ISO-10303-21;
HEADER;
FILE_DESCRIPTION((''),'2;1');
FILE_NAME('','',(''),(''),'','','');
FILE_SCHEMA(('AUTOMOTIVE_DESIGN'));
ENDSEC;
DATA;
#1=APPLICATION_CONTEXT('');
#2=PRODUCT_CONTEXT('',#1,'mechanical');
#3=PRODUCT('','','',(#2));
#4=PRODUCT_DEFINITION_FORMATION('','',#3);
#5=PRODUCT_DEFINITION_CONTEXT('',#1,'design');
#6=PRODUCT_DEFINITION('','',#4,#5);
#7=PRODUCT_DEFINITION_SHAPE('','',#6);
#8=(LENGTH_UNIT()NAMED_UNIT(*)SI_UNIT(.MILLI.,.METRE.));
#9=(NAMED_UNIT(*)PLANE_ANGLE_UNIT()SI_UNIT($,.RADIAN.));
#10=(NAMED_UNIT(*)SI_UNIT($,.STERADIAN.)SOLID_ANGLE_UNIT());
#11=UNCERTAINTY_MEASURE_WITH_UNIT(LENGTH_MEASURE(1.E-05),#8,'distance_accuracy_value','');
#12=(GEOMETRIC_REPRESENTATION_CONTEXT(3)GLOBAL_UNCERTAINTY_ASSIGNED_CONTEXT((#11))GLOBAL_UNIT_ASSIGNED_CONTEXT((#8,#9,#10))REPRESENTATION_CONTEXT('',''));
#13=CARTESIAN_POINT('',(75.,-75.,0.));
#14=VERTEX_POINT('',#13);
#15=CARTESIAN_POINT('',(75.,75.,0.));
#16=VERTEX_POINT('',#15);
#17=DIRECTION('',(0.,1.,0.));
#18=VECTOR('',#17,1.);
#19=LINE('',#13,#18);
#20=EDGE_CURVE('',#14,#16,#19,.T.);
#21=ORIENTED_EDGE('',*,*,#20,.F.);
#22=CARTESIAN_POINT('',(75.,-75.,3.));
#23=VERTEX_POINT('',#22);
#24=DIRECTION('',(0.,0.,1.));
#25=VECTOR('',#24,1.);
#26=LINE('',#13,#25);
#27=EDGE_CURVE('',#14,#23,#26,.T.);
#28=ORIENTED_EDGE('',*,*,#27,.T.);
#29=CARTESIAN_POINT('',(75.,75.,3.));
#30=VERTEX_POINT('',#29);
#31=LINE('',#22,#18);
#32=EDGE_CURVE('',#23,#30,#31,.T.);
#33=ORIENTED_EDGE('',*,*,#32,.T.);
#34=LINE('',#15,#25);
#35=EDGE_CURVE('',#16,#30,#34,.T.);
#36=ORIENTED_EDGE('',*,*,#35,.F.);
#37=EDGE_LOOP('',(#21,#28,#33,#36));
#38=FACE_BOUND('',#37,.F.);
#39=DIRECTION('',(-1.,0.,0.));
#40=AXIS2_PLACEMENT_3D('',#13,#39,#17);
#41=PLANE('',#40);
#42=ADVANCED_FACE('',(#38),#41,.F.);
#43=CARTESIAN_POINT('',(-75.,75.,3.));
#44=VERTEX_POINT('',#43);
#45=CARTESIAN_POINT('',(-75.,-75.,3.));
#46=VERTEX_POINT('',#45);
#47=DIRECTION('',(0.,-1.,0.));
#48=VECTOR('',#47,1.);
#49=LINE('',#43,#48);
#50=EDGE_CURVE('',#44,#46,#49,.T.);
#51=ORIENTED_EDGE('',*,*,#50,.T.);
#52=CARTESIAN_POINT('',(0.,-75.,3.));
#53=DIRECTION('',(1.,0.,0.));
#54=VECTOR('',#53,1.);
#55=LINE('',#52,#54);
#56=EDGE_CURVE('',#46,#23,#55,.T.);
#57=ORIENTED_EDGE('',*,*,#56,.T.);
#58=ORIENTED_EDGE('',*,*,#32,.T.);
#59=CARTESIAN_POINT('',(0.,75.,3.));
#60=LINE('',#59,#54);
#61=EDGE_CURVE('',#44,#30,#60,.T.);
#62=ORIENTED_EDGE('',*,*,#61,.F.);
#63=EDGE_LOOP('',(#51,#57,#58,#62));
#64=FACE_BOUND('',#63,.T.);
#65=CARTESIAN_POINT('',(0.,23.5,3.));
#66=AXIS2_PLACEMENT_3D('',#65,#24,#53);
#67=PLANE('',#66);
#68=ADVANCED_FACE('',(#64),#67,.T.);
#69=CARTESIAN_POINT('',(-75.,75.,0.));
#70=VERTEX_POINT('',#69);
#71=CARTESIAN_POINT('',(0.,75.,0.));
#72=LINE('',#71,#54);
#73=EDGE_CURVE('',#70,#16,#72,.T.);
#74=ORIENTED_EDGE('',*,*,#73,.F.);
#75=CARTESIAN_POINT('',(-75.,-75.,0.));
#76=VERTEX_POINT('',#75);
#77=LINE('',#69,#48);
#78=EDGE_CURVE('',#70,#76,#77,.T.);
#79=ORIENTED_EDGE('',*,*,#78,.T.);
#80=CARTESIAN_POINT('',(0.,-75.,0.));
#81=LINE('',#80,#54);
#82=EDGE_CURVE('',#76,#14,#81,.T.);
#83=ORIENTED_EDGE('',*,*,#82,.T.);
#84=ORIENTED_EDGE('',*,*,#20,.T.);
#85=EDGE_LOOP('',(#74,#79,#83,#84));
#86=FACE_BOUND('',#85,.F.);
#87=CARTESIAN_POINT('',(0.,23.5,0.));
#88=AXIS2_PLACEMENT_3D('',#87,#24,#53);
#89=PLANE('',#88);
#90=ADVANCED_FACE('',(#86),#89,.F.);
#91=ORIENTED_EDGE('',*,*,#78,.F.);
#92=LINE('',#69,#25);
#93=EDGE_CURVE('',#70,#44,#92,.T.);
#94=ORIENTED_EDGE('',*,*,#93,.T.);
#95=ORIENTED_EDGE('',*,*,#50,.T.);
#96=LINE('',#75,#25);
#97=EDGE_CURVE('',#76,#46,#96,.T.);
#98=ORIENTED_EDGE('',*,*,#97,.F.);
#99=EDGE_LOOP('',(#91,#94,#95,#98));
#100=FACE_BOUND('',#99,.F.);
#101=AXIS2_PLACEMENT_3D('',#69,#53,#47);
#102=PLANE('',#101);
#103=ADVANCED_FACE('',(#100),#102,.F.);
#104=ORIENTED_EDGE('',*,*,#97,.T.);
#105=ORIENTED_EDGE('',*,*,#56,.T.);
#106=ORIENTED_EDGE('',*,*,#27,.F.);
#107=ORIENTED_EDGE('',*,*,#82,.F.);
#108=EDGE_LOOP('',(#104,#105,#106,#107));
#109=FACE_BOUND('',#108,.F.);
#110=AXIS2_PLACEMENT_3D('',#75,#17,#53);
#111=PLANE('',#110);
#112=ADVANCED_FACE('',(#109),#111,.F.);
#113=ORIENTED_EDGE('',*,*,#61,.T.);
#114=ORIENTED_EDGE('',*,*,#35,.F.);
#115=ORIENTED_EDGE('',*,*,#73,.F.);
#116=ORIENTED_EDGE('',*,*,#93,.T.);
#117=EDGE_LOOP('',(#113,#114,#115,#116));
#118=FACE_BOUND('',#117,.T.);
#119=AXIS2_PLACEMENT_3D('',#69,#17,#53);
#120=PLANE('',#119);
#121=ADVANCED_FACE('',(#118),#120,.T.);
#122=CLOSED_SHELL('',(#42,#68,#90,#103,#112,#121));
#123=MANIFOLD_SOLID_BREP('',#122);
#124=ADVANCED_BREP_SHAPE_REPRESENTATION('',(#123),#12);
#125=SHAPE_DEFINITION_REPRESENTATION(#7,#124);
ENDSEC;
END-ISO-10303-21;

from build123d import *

# Parameters (mm, degrees)
F0_W     = 150
F0_H     = 103
F0_H_2   = 12
F0_H_3   = 25
F0_H_4   = 10
F1_DEPTH = 3


with BuildPart() as f1:
    # F0 (on Top) → F1 (new body)
    with BuildSketch(Plane.XY):
        with Locations((0, 23.5)):
            Rectangle(F0_W, F0_H)
        with Locations((0, -34)):
            Rectangle(F0_W, F0_H_2)
        with Locations((0, -52.5)):
            Rectangle(F0_W, F0_H_3)
        with Locations((0, -70)):
            Rectangle(F0_W, F0_H_4)
    extrude(amount=F1_DEPTH)


solid = f1.part
